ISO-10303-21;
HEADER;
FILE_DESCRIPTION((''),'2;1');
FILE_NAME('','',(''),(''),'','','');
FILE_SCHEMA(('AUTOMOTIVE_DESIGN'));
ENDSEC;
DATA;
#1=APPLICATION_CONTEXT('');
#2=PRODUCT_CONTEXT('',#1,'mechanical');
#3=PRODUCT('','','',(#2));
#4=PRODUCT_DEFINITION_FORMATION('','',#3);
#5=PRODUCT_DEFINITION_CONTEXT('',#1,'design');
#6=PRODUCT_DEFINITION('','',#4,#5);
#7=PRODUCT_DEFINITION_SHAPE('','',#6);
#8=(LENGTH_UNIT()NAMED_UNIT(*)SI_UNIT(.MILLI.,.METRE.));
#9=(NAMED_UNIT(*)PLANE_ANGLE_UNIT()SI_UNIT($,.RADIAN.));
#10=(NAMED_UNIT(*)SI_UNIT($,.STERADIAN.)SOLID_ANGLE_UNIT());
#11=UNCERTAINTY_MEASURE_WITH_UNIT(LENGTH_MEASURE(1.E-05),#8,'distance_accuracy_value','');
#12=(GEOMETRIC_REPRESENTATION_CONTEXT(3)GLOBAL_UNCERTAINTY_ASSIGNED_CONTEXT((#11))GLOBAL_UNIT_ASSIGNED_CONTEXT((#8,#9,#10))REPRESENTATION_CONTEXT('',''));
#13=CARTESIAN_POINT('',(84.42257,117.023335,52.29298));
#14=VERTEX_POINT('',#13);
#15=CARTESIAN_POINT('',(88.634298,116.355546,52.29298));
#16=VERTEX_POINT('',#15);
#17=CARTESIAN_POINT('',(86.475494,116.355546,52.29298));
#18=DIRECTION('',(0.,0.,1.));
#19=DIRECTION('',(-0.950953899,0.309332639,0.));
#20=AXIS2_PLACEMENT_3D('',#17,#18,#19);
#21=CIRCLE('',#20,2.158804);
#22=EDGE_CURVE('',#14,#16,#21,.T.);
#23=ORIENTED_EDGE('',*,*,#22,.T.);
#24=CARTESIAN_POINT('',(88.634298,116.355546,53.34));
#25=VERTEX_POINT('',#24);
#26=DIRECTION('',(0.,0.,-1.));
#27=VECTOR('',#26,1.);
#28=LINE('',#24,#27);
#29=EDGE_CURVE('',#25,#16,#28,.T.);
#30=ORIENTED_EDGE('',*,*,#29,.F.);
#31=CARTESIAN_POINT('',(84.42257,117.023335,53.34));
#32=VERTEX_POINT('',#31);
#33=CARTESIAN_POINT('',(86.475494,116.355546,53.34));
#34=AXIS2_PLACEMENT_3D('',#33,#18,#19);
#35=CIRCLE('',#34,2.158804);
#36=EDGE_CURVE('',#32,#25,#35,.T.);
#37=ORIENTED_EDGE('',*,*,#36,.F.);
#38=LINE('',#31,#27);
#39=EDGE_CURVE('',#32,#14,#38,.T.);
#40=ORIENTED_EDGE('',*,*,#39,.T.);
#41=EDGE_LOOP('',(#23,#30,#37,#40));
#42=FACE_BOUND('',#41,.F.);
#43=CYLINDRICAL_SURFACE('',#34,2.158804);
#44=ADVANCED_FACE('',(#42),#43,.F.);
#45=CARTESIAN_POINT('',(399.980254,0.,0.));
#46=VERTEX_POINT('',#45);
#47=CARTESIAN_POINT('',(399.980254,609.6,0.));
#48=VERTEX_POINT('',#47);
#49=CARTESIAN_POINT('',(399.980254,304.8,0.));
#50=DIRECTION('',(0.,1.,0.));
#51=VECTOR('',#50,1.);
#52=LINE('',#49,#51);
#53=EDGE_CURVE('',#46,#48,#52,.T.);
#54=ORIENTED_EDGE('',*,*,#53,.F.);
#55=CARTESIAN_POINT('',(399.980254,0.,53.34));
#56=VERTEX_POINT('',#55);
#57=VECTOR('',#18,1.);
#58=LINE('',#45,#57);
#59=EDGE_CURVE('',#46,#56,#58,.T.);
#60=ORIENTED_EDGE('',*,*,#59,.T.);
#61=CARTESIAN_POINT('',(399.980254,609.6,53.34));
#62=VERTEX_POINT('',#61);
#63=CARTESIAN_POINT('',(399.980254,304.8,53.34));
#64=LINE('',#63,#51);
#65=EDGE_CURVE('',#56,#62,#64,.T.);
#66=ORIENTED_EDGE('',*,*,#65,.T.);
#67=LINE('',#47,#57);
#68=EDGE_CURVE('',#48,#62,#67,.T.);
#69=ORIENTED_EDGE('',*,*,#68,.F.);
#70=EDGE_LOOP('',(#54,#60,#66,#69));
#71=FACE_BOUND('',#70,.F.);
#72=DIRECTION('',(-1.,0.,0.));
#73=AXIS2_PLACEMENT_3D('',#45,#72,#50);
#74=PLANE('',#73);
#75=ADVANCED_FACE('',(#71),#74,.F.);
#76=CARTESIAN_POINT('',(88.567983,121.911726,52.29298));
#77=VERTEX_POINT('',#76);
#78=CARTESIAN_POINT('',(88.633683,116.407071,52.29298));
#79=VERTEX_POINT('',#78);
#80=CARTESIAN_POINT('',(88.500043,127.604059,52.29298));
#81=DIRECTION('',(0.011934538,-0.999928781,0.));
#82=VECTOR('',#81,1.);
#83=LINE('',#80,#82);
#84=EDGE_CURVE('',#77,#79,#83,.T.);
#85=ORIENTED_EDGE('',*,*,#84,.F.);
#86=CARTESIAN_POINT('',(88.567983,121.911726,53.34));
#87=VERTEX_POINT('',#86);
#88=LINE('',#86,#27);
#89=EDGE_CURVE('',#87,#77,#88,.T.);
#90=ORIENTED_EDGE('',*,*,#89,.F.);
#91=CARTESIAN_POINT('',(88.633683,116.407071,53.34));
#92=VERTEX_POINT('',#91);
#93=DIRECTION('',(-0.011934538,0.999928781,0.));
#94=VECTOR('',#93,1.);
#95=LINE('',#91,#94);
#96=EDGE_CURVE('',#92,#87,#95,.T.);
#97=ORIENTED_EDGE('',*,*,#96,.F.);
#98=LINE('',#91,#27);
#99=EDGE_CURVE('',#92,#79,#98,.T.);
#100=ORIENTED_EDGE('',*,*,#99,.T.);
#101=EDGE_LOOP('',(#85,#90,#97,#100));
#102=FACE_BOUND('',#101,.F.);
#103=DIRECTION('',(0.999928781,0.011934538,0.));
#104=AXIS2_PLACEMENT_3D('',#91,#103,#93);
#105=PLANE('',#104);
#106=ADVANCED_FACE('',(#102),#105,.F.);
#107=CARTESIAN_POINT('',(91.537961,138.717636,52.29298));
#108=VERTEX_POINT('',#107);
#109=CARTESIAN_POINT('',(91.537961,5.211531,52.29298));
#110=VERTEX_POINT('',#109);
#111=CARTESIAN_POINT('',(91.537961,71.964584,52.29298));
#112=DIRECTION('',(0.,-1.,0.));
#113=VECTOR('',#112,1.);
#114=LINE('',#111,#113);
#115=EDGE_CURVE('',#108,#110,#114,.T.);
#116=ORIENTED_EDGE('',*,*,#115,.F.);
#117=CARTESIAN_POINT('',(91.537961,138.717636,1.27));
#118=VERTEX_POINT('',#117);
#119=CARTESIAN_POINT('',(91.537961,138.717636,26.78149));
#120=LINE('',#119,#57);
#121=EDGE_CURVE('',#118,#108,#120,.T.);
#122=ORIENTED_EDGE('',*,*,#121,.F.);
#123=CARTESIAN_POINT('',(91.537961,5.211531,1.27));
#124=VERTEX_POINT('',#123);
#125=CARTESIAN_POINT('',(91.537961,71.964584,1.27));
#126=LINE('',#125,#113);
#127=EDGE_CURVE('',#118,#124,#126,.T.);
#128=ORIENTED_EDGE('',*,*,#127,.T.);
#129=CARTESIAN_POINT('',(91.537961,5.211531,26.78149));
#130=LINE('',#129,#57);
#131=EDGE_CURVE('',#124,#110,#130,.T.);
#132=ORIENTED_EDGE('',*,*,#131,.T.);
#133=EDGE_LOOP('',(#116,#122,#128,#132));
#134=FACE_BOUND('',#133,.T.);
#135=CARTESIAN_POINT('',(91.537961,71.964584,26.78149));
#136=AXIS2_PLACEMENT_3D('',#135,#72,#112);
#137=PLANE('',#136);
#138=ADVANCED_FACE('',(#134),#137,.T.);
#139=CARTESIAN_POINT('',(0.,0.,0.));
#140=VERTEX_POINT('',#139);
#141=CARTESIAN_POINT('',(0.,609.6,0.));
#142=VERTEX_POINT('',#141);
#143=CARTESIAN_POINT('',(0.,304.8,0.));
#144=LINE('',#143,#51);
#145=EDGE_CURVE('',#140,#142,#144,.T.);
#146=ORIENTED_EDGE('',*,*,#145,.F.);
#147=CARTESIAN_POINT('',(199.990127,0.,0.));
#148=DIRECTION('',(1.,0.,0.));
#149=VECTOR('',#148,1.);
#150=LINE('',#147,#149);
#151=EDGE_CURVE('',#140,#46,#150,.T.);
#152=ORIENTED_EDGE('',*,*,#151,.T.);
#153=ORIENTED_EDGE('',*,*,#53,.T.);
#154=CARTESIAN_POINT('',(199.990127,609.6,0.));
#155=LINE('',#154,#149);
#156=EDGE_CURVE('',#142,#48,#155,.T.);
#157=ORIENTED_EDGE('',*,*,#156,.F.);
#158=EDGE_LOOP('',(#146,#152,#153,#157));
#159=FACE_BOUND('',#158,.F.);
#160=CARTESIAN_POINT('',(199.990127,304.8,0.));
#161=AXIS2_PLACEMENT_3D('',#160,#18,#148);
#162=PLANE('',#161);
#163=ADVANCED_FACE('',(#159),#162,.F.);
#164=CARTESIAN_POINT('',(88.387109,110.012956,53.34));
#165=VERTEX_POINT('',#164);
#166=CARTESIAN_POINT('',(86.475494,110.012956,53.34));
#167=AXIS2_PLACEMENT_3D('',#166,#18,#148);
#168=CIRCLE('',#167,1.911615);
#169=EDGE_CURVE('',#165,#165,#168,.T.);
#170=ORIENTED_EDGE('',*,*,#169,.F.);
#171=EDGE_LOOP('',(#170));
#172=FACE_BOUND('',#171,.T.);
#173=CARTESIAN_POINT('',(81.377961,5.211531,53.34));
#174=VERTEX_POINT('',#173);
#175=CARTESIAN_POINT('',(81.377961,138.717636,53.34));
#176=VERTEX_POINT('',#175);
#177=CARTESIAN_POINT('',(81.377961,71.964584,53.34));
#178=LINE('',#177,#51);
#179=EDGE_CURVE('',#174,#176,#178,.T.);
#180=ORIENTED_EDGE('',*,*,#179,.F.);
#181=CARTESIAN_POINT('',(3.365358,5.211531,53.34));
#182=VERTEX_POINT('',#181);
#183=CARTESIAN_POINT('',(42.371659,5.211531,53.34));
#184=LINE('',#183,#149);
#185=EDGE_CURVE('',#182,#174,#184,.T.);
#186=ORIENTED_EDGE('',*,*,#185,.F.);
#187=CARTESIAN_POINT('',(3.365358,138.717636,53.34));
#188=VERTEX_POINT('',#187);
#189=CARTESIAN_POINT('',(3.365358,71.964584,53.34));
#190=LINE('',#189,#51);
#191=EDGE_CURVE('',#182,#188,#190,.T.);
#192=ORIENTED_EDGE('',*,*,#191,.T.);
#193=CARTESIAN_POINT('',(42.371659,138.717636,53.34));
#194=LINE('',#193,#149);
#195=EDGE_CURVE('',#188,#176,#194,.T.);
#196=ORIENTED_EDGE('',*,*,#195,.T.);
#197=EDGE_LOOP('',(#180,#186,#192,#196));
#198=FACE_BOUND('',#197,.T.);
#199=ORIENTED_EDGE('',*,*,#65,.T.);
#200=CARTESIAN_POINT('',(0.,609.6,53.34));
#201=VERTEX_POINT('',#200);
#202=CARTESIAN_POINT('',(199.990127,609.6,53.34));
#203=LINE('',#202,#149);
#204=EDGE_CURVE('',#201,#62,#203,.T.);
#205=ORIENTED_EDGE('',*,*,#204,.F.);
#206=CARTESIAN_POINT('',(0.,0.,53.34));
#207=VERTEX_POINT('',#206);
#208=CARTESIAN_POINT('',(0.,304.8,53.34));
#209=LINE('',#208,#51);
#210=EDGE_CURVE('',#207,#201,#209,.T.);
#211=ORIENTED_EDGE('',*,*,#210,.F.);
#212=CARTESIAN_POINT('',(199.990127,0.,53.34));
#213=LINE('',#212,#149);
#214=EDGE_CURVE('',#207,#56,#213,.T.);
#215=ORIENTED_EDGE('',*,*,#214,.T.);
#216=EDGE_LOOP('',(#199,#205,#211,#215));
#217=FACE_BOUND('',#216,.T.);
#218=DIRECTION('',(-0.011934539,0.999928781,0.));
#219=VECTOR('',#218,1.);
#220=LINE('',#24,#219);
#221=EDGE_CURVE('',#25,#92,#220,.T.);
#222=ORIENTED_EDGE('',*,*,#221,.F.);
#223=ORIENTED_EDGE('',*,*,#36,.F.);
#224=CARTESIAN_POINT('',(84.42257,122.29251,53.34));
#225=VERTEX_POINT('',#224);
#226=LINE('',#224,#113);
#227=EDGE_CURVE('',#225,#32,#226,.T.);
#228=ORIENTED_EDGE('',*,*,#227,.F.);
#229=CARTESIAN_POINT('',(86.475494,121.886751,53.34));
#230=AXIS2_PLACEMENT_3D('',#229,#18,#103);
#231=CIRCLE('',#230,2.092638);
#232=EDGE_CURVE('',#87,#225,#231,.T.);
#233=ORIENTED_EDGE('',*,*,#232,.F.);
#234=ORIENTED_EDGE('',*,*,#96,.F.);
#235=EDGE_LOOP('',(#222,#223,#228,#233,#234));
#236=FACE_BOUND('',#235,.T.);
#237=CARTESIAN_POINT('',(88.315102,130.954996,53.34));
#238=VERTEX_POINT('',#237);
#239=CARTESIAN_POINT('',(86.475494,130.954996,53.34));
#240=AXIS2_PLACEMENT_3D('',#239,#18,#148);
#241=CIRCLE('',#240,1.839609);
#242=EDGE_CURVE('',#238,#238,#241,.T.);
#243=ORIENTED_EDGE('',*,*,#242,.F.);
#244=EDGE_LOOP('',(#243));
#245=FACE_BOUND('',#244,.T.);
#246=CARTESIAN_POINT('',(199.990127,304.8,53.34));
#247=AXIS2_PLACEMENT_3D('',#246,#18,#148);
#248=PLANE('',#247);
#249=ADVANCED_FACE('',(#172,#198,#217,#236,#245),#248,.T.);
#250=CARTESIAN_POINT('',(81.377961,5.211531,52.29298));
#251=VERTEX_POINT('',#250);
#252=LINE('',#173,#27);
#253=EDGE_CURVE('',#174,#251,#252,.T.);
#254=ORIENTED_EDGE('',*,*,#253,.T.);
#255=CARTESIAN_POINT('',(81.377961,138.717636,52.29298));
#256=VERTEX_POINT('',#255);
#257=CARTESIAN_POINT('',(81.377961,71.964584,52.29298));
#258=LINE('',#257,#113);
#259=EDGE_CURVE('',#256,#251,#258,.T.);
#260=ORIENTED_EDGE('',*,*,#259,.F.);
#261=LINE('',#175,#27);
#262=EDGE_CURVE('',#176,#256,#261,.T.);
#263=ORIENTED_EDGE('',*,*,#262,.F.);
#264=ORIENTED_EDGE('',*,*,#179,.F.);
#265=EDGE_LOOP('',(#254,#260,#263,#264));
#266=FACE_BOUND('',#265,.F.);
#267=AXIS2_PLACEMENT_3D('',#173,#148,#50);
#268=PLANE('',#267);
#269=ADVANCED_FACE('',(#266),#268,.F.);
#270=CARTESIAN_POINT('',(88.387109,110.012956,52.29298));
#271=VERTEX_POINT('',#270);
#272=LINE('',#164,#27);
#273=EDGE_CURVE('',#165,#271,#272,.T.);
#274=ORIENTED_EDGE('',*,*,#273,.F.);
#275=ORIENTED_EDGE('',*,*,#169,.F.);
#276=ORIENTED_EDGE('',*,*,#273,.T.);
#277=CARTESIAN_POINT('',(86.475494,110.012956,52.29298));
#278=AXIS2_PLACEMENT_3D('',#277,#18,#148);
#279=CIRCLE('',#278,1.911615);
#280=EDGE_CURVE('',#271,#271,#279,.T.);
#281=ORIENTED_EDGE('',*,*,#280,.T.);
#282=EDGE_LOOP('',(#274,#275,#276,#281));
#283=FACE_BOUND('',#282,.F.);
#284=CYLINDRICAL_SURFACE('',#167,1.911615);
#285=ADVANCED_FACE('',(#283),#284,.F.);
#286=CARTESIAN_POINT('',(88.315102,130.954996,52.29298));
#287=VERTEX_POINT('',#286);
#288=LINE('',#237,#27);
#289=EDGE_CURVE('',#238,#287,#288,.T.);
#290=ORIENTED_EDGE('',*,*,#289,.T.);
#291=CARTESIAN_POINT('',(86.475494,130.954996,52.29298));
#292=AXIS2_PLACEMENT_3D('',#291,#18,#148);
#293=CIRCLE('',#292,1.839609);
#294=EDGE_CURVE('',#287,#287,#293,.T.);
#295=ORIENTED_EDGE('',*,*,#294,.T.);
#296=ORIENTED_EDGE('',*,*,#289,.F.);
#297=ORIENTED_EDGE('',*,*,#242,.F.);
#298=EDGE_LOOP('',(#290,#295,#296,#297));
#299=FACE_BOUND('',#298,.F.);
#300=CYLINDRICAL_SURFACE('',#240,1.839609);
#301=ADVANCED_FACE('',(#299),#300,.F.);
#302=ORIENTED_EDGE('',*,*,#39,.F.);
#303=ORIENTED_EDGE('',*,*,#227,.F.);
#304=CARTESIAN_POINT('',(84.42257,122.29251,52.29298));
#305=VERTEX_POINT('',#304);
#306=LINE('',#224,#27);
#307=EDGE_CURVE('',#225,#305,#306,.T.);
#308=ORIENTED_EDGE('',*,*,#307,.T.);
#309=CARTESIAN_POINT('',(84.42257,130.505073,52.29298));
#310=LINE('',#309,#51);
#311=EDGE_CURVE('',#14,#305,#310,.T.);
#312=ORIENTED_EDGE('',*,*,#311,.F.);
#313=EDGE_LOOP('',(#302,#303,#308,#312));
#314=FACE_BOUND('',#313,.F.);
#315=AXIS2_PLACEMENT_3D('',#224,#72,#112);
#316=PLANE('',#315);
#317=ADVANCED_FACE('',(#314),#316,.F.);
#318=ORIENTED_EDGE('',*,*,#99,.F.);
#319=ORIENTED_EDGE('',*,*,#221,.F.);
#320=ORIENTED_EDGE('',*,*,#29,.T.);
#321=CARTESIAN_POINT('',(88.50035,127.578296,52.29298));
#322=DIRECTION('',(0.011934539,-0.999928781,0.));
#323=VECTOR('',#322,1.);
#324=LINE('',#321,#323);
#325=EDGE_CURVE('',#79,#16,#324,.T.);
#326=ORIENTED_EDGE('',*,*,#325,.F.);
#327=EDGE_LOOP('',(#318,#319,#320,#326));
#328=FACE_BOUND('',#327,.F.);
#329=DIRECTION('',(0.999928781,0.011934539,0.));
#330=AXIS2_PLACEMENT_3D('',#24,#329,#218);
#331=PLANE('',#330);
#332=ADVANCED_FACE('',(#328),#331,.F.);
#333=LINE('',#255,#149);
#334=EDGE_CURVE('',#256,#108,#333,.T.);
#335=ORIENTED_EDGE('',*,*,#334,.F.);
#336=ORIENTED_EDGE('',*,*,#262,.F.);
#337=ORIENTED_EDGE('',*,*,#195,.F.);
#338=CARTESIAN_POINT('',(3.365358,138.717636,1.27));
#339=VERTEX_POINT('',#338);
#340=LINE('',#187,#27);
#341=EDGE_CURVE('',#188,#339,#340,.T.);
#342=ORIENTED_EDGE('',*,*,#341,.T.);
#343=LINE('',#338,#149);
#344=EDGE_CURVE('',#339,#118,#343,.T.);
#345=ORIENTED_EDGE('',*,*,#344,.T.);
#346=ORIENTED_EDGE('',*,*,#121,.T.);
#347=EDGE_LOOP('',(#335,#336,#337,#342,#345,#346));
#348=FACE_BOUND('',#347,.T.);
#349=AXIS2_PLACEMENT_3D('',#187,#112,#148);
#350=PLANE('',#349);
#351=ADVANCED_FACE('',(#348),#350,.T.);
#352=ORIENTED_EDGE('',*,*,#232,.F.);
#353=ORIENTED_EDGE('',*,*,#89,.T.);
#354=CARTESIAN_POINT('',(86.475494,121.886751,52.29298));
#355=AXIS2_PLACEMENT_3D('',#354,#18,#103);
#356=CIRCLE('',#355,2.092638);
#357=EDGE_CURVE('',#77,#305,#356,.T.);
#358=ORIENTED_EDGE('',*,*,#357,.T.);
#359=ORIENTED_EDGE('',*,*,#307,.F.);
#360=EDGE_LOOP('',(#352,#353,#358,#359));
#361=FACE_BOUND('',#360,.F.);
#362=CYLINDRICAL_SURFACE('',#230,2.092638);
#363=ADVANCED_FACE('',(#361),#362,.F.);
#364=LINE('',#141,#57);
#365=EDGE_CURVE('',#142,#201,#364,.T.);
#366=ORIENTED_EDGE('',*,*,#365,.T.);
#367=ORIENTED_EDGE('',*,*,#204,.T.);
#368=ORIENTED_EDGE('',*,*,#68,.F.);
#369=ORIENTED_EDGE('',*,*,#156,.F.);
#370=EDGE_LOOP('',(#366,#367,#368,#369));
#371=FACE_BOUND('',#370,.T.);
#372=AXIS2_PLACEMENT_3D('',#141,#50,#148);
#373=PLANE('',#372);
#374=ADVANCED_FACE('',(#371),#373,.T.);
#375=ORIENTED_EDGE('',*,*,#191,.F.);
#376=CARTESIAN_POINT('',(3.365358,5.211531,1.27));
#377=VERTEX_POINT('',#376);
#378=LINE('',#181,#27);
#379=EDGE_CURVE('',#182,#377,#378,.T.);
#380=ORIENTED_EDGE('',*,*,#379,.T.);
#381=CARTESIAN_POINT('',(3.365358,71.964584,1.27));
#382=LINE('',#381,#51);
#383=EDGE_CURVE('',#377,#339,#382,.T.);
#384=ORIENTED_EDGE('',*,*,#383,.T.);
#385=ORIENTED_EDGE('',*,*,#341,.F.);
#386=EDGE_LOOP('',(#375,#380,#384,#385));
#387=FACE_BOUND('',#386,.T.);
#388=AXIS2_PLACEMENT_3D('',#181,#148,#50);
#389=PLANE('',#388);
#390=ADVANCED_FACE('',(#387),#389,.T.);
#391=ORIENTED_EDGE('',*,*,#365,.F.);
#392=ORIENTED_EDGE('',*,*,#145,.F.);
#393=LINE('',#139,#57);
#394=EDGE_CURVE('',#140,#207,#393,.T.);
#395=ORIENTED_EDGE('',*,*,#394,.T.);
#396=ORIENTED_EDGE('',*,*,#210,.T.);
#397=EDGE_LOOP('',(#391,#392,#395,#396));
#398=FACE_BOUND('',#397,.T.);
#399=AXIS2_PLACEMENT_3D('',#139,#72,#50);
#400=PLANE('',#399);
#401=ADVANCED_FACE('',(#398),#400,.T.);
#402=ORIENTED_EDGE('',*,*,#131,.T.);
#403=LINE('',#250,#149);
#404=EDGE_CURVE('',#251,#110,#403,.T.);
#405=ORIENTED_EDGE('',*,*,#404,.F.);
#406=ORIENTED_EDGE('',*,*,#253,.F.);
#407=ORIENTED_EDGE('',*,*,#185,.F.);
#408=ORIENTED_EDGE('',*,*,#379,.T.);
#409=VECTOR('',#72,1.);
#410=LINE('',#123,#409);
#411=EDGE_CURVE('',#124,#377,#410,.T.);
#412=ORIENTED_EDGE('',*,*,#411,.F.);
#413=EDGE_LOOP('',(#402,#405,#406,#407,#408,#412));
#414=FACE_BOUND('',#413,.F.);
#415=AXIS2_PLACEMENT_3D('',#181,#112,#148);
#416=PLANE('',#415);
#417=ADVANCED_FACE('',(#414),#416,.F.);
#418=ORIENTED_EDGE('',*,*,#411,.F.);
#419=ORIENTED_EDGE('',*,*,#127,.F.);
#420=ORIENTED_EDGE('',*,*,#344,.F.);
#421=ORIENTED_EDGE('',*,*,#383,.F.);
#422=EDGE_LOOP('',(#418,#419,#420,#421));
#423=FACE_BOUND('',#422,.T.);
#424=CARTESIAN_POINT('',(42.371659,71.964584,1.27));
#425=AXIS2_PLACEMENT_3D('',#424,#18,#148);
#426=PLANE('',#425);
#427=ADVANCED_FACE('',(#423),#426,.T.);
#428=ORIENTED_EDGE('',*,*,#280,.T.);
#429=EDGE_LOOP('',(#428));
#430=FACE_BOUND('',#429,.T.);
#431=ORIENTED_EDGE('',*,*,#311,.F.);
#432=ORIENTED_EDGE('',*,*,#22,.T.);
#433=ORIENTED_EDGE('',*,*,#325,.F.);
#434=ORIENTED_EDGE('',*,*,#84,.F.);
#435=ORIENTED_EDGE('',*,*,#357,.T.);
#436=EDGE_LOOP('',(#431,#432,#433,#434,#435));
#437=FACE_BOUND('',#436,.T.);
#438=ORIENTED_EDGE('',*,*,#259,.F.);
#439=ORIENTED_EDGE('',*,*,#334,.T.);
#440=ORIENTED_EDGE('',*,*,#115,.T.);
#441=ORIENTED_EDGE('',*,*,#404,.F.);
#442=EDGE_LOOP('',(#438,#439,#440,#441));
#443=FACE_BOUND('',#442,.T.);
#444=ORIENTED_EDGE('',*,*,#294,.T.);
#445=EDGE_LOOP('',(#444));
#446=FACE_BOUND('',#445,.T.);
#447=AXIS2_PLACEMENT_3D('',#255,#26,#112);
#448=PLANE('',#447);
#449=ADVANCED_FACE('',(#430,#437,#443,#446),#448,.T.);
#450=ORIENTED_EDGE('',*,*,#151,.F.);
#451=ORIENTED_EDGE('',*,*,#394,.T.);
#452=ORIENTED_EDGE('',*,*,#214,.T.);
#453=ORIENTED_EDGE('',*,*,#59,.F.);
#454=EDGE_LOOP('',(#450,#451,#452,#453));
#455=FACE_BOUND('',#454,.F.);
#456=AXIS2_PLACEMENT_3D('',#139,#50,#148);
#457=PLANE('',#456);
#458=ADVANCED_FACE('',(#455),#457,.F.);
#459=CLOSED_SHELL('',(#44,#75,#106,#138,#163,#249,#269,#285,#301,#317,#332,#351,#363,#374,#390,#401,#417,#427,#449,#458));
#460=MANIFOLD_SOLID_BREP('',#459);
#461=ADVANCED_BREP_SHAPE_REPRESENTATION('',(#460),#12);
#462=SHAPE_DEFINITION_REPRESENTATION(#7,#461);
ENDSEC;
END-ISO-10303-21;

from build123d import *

# Parameters (mm, degrees)
F0_W     = 399.9802543244
F0_H     = 609.6
F1_DEPTH = 53.34
F2_W     = 78.0126031023
F2_H     = 133.5061052814
F3_DEPTH = 52.07
F4_W     = 133.5061052814
F4_H     = 51.0229802537
F5_DEPTH = 10.16
F6_R     = 1.8396087238
F6_R_2   = 1.9116150916
F7_DEPTH = 25.4


with BuildPart() as f1:
    # F0 (on Top) → F1 (new body)
    with BuildSketch(Plane.XY):
        with Locations((199.9901271622, 304.8)):
            Rectangle(F0_W, F0_H)
    extrude(amount=F1_DEPTH)

    # F2 (on face) → F3 (cut)
    with BuildSketch(Plane.XY.offset(53.34)):
        with Locations((42.3716591904, 71.9645838253)):
            Rectangle(F2_W, F2_H)
    extrude(amount=-F3_DEPTH, mode=Mode.SUBTRACT)

    # F4 (on face) → F5 (cut)
    with BuildSketch(Plane(origin=(81.3779607415, 0, 0), x_dir=(0, -1, 0), z_dir=(-1, 0, 0))):
        with Locations((-71.9645838253, 26.7814901268)):
            Rectangle(F4_W, F4_H)
    extrude(amount=-F5_DEPTH, mode=Mode.SUBTRACT)

    # F6 (on face) → F7 (cut)
    with BuildSketch(Plane.XY.offset(53.34)):
        with Locations((86.4754936327, 130.9549957514)):
            Circle(F6_R)
        with BuildLine():
            Line((84.4225700873, 121.4809922279), (84.4225700873, 117.0233345083))
            ThreePointArc((84.4225700873, 117.0233345083), (86.1374283625, 114.22337587), (88.6342981207, 116.3555458188))
            Line((88.6342981207, 116.3555458188), (88.6336831498, 116.4070708193))
            Line((88.6336831498, 116.4070708193), (88.5679829552, 121.9117257152))
            ThreePointArc((88.5679829552, 121.9117257152), (86.6669107252, 123.970616392), (84.4225700873, 122.2925098566))
            Line((84.4225700873, 122.2925098566), (84.4225700873, 121.4809922279))
        make_face()
        with Locations((86.4754936327, 110.0129559636)):
            Circle(F6_R_2)
    extrude(amount=-F7_DEPTH, mode=Mode.SUBTRACT)


solid = f1.part
